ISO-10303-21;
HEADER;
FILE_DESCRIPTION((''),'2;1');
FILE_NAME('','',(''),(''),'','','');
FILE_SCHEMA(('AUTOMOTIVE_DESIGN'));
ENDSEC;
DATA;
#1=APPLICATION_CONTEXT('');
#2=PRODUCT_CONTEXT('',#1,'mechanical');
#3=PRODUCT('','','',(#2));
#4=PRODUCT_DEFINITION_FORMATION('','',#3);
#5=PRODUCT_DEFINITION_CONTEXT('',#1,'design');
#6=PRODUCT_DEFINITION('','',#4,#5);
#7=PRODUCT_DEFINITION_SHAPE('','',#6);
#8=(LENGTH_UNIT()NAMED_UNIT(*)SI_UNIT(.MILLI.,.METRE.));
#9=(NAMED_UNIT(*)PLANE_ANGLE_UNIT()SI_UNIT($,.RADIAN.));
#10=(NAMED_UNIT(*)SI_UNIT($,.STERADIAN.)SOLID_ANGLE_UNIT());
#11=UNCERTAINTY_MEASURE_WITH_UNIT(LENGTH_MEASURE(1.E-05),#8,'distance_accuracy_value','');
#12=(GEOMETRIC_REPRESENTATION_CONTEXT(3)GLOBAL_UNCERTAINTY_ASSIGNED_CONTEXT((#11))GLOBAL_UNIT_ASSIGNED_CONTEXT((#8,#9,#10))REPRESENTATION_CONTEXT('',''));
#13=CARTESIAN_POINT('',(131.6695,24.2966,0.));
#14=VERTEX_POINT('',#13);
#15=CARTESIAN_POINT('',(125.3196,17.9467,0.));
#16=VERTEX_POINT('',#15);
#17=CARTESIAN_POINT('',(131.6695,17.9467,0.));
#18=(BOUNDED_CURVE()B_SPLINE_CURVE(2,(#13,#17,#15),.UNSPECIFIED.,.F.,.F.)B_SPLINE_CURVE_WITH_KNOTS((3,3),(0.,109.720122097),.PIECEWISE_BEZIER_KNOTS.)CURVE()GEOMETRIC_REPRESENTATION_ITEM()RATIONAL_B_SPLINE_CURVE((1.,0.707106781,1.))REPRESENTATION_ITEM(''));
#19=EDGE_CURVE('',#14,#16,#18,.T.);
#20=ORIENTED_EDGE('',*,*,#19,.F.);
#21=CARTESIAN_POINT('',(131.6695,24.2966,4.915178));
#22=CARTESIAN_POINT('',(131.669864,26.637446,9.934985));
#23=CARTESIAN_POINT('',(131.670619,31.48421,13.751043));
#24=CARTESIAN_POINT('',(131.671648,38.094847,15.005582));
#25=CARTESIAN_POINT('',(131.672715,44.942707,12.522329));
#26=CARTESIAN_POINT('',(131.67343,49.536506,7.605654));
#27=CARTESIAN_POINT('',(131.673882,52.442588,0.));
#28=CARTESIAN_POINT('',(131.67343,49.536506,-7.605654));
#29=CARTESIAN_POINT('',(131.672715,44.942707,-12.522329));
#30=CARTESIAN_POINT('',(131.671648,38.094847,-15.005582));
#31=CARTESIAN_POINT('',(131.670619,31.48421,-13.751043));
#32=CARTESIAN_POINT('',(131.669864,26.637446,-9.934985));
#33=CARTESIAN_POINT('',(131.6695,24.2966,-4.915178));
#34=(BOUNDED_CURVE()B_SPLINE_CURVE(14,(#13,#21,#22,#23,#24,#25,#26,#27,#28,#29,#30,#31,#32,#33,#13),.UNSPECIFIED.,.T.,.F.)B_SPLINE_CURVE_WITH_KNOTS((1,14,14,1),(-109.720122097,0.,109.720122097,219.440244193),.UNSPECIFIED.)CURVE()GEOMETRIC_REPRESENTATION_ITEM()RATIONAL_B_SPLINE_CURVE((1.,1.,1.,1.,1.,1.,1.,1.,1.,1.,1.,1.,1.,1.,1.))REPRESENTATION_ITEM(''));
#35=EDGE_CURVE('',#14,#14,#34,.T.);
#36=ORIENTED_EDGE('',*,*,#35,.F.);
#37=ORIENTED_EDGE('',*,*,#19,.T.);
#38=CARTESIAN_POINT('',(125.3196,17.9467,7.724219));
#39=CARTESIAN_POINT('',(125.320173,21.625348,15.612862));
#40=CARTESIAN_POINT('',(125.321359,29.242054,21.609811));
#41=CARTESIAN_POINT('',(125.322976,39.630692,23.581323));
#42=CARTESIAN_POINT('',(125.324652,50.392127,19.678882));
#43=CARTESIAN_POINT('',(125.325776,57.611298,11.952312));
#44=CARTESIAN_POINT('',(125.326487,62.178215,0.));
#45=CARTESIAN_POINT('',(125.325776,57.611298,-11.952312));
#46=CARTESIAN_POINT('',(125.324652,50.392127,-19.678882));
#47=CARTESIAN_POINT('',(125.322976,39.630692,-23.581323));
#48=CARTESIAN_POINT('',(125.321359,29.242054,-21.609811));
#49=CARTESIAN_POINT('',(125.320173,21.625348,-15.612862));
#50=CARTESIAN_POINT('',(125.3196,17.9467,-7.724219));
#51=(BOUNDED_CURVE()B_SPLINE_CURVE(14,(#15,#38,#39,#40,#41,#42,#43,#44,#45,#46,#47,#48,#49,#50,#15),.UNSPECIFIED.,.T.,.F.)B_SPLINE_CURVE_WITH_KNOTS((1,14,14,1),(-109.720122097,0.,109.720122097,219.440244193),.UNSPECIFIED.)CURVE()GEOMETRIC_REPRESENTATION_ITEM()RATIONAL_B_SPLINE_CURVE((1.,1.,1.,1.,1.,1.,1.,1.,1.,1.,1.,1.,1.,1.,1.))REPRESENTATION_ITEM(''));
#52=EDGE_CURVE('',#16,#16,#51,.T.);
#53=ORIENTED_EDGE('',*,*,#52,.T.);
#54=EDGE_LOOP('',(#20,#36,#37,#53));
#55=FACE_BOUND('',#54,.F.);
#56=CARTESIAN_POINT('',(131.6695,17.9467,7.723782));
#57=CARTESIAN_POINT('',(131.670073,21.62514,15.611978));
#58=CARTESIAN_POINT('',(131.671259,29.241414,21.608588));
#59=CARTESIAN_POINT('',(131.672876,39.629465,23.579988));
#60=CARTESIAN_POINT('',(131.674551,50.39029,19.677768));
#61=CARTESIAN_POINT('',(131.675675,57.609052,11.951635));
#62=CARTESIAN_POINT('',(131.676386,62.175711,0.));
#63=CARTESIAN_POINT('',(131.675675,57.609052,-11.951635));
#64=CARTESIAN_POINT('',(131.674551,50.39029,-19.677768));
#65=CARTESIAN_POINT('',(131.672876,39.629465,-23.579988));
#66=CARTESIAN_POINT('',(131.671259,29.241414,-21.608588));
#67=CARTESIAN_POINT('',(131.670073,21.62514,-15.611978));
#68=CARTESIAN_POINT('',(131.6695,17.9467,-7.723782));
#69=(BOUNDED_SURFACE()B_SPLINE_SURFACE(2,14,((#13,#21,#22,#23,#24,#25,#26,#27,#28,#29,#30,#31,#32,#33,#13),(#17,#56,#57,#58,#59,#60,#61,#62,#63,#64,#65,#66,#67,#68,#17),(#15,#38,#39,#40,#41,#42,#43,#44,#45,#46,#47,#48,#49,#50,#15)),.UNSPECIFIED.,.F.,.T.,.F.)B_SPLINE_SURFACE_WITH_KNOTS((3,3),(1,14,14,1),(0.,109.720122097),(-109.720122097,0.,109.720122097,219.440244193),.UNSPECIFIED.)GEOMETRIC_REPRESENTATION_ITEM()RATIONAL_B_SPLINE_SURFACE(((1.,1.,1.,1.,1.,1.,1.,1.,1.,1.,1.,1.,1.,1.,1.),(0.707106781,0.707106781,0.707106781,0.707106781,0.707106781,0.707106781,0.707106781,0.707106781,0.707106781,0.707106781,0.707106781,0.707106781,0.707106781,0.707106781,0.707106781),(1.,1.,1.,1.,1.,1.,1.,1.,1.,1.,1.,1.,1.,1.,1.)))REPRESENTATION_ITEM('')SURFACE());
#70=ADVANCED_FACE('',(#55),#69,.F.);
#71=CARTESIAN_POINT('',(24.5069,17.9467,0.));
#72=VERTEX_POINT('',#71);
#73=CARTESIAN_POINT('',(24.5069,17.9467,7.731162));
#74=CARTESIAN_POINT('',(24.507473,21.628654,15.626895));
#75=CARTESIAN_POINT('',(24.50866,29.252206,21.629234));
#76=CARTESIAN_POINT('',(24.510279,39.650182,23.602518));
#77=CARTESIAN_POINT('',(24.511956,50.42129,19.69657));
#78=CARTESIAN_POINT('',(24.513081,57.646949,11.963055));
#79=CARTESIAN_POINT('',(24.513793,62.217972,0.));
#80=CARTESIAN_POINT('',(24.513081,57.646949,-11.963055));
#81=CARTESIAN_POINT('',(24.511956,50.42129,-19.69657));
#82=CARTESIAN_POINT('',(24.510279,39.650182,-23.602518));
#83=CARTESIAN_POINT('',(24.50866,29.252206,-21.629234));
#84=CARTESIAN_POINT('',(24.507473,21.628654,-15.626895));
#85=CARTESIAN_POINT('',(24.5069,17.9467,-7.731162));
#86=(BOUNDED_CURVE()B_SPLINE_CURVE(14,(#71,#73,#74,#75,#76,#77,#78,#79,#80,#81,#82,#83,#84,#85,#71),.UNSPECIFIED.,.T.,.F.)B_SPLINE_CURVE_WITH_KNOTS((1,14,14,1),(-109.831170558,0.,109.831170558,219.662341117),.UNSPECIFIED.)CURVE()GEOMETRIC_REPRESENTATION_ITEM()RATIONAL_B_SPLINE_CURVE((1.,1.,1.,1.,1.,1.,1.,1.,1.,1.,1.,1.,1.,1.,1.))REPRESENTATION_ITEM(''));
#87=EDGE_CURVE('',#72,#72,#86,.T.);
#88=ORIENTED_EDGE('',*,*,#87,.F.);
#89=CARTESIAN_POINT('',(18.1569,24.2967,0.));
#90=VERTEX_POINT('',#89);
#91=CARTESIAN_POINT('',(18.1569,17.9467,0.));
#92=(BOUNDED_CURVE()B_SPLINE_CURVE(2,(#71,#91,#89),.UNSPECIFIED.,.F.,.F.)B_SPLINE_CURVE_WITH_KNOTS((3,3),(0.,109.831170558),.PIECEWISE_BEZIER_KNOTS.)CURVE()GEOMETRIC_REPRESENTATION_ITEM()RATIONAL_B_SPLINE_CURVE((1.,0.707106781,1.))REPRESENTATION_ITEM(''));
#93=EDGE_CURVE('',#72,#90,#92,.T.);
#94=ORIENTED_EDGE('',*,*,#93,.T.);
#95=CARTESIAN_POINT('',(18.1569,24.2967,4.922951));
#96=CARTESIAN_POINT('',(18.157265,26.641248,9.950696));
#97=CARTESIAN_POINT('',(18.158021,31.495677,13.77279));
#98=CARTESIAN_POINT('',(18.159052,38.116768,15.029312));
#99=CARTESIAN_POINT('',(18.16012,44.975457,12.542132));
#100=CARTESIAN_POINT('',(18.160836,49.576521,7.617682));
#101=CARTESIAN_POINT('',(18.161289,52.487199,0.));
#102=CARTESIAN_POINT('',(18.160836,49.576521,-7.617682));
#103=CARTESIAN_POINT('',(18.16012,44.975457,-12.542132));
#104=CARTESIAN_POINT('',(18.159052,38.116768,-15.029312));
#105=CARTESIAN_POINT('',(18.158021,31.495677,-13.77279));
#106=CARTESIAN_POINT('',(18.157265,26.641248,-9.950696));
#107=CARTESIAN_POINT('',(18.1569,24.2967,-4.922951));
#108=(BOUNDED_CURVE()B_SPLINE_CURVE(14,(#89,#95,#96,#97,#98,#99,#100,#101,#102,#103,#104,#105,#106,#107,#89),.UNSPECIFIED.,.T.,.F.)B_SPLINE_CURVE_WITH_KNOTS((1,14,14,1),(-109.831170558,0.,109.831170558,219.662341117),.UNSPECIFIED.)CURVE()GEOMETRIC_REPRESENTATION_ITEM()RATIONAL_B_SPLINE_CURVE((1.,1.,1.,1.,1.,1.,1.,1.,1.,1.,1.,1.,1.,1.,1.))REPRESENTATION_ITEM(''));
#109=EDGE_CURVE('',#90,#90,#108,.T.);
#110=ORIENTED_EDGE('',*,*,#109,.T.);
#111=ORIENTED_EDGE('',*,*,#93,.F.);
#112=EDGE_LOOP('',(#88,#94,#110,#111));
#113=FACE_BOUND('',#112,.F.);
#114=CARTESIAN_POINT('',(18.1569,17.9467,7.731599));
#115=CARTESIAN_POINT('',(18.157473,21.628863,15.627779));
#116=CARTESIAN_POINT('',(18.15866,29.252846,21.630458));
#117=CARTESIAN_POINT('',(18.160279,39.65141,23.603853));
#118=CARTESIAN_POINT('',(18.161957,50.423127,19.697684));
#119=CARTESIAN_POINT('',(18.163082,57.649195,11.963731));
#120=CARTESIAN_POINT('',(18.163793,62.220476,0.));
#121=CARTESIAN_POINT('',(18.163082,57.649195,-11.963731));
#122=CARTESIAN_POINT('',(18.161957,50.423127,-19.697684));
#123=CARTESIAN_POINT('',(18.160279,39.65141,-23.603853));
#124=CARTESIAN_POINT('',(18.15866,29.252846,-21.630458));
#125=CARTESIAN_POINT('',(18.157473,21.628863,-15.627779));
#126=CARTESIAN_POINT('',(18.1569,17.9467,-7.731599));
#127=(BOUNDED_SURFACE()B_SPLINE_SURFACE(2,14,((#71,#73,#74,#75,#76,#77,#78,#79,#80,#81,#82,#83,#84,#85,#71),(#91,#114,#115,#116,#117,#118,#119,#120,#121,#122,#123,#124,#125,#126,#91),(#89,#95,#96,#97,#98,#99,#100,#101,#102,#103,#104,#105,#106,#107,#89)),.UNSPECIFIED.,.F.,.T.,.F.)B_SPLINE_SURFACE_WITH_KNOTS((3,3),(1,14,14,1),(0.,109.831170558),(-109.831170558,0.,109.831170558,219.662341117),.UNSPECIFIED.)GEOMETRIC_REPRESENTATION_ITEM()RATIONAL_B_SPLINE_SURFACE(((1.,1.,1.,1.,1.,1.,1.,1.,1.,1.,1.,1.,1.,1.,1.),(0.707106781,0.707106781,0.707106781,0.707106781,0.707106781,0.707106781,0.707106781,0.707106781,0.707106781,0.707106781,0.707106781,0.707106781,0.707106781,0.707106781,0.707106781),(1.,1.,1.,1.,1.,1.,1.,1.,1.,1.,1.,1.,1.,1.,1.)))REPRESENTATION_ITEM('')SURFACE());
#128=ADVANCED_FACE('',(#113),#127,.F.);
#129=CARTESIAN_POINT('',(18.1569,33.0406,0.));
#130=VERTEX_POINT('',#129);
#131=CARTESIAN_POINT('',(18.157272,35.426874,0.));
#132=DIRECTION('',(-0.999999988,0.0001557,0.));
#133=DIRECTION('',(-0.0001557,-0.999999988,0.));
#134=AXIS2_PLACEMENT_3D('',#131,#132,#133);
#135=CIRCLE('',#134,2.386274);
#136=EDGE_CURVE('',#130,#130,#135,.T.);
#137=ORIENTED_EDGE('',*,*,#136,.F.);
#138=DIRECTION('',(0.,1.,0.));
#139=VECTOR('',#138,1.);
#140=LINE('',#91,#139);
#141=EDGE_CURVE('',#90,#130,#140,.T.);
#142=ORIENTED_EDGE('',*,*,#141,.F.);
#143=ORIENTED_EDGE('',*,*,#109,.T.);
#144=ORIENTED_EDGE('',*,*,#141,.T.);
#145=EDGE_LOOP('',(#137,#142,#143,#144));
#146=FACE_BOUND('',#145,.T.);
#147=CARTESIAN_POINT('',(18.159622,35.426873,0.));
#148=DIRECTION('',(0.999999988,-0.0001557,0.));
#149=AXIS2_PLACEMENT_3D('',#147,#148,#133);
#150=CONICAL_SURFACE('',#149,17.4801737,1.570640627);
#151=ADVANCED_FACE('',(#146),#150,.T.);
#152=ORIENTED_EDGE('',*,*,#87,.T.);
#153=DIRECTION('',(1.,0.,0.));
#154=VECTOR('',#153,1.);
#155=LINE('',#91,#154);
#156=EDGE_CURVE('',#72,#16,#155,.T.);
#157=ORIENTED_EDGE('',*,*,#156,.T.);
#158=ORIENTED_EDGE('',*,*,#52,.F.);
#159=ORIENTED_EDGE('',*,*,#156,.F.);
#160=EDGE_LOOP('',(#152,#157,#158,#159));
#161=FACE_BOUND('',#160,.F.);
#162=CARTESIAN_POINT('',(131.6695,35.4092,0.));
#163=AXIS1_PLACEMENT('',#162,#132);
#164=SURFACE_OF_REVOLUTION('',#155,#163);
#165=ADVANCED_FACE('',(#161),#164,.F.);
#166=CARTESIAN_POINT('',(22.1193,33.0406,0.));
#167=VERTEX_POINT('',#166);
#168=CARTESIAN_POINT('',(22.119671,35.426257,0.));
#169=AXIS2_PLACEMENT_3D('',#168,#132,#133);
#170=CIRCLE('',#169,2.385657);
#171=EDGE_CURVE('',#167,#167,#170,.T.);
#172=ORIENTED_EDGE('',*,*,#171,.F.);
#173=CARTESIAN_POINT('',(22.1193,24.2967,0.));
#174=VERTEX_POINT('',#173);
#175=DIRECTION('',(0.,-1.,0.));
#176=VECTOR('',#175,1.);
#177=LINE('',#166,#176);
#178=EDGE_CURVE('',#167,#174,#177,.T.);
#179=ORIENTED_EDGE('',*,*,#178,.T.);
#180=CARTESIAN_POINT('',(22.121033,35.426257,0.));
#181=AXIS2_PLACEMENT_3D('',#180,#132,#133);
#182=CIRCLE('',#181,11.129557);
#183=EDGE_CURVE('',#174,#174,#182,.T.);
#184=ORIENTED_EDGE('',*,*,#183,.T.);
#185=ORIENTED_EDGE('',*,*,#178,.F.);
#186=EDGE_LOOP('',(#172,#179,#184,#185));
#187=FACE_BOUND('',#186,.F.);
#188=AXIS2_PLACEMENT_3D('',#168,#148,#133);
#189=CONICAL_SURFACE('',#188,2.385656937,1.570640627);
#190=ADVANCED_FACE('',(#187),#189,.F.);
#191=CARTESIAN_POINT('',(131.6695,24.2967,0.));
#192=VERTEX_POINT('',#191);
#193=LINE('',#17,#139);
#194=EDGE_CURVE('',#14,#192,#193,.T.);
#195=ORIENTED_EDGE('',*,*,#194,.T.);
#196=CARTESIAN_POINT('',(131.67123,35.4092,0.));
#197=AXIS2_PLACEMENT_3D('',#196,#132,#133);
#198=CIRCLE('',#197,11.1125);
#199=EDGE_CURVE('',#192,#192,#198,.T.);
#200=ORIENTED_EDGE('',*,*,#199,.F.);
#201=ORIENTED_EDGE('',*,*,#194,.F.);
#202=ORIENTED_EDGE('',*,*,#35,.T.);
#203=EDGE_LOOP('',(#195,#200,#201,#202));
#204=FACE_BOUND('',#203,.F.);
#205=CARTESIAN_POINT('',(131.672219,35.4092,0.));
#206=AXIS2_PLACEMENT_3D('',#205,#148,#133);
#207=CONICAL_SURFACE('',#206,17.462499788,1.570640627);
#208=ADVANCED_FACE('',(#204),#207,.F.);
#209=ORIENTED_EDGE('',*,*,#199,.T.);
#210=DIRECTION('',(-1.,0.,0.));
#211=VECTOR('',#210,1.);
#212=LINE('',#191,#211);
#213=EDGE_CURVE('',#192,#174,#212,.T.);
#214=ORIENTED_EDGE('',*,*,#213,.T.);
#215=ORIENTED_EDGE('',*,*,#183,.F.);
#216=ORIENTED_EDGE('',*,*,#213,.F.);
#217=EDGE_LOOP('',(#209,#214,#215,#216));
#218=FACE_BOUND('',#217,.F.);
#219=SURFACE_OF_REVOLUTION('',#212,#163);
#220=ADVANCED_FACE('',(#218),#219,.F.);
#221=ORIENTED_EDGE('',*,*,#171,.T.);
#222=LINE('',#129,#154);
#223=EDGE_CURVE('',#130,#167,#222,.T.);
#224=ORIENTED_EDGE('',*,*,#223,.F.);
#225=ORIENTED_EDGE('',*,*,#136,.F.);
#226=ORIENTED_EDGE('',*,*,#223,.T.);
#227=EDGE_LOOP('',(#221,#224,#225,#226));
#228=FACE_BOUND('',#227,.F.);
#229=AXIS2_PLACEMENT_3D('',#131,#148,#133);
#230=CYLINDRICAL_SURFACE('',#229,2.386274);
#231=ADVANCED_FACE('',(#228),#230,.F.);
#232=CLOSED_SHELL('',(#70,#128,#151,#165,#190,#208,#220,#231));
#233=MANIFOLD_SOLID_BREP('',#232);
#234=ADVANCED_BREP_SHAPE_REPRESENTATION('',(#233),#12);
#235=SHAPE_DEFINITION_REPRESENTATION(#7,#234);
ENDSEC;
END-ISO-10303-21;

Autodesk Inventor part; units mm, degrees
ref_plane "YZ Plane" through (0, 0, 0) normal (1, 0, 0) x (0, 1, 0)
ref_plane "XZ Plane" through (0, 0, 0) normal (0, 1, 0) x (-1, 0, 0)
ref_plane "XY Plane" through (0, 0, 0) normal (0, 0, 1) x (1, 0, 0)
sketch "Sketch1" plane through (0, 0, 0) normal (0, 0, 1) x (1, 0, 0)
  line L0 (131.6695, 17.9467) -> (18.1569, 17.9467) construction
  line L1 (18.1569, 17.9467) -> (131.6695, 17.9467)
  line L2 (131.6695, 17.9467) -> (131.6695, 24.2967)
  line L3 (131.6695, 24.2967) -> (22.1193, 24.2967)
  line L4 (18.1569, 17.9467) -> (18.1569, 33.0406)
  line L5 (18.1569, 33.0406) -> (22.1193, 33.0406)
  line L6 (22.1193, 33.0406) -> (22.1193, 24.2967)
  line L7 (131.6695, 35.4092) -> (50.1187, 35.4219) construction
  dimension "d3" = 113.5126
revolve "Revolution1" add sketch "Sketch1" angle 360 about axis through (131.6695, 35.4092, 0) along (-1, 0.0001557, 0)
fillet "Fillet1" radius 6.35 1 edges at (131.6749, 52.8717, 0)
fillet "Fillet2" radius 6.35 1 edges at (18.1623, 52.9071, 0)
properties part number "RubberHandleSleeveTL"
